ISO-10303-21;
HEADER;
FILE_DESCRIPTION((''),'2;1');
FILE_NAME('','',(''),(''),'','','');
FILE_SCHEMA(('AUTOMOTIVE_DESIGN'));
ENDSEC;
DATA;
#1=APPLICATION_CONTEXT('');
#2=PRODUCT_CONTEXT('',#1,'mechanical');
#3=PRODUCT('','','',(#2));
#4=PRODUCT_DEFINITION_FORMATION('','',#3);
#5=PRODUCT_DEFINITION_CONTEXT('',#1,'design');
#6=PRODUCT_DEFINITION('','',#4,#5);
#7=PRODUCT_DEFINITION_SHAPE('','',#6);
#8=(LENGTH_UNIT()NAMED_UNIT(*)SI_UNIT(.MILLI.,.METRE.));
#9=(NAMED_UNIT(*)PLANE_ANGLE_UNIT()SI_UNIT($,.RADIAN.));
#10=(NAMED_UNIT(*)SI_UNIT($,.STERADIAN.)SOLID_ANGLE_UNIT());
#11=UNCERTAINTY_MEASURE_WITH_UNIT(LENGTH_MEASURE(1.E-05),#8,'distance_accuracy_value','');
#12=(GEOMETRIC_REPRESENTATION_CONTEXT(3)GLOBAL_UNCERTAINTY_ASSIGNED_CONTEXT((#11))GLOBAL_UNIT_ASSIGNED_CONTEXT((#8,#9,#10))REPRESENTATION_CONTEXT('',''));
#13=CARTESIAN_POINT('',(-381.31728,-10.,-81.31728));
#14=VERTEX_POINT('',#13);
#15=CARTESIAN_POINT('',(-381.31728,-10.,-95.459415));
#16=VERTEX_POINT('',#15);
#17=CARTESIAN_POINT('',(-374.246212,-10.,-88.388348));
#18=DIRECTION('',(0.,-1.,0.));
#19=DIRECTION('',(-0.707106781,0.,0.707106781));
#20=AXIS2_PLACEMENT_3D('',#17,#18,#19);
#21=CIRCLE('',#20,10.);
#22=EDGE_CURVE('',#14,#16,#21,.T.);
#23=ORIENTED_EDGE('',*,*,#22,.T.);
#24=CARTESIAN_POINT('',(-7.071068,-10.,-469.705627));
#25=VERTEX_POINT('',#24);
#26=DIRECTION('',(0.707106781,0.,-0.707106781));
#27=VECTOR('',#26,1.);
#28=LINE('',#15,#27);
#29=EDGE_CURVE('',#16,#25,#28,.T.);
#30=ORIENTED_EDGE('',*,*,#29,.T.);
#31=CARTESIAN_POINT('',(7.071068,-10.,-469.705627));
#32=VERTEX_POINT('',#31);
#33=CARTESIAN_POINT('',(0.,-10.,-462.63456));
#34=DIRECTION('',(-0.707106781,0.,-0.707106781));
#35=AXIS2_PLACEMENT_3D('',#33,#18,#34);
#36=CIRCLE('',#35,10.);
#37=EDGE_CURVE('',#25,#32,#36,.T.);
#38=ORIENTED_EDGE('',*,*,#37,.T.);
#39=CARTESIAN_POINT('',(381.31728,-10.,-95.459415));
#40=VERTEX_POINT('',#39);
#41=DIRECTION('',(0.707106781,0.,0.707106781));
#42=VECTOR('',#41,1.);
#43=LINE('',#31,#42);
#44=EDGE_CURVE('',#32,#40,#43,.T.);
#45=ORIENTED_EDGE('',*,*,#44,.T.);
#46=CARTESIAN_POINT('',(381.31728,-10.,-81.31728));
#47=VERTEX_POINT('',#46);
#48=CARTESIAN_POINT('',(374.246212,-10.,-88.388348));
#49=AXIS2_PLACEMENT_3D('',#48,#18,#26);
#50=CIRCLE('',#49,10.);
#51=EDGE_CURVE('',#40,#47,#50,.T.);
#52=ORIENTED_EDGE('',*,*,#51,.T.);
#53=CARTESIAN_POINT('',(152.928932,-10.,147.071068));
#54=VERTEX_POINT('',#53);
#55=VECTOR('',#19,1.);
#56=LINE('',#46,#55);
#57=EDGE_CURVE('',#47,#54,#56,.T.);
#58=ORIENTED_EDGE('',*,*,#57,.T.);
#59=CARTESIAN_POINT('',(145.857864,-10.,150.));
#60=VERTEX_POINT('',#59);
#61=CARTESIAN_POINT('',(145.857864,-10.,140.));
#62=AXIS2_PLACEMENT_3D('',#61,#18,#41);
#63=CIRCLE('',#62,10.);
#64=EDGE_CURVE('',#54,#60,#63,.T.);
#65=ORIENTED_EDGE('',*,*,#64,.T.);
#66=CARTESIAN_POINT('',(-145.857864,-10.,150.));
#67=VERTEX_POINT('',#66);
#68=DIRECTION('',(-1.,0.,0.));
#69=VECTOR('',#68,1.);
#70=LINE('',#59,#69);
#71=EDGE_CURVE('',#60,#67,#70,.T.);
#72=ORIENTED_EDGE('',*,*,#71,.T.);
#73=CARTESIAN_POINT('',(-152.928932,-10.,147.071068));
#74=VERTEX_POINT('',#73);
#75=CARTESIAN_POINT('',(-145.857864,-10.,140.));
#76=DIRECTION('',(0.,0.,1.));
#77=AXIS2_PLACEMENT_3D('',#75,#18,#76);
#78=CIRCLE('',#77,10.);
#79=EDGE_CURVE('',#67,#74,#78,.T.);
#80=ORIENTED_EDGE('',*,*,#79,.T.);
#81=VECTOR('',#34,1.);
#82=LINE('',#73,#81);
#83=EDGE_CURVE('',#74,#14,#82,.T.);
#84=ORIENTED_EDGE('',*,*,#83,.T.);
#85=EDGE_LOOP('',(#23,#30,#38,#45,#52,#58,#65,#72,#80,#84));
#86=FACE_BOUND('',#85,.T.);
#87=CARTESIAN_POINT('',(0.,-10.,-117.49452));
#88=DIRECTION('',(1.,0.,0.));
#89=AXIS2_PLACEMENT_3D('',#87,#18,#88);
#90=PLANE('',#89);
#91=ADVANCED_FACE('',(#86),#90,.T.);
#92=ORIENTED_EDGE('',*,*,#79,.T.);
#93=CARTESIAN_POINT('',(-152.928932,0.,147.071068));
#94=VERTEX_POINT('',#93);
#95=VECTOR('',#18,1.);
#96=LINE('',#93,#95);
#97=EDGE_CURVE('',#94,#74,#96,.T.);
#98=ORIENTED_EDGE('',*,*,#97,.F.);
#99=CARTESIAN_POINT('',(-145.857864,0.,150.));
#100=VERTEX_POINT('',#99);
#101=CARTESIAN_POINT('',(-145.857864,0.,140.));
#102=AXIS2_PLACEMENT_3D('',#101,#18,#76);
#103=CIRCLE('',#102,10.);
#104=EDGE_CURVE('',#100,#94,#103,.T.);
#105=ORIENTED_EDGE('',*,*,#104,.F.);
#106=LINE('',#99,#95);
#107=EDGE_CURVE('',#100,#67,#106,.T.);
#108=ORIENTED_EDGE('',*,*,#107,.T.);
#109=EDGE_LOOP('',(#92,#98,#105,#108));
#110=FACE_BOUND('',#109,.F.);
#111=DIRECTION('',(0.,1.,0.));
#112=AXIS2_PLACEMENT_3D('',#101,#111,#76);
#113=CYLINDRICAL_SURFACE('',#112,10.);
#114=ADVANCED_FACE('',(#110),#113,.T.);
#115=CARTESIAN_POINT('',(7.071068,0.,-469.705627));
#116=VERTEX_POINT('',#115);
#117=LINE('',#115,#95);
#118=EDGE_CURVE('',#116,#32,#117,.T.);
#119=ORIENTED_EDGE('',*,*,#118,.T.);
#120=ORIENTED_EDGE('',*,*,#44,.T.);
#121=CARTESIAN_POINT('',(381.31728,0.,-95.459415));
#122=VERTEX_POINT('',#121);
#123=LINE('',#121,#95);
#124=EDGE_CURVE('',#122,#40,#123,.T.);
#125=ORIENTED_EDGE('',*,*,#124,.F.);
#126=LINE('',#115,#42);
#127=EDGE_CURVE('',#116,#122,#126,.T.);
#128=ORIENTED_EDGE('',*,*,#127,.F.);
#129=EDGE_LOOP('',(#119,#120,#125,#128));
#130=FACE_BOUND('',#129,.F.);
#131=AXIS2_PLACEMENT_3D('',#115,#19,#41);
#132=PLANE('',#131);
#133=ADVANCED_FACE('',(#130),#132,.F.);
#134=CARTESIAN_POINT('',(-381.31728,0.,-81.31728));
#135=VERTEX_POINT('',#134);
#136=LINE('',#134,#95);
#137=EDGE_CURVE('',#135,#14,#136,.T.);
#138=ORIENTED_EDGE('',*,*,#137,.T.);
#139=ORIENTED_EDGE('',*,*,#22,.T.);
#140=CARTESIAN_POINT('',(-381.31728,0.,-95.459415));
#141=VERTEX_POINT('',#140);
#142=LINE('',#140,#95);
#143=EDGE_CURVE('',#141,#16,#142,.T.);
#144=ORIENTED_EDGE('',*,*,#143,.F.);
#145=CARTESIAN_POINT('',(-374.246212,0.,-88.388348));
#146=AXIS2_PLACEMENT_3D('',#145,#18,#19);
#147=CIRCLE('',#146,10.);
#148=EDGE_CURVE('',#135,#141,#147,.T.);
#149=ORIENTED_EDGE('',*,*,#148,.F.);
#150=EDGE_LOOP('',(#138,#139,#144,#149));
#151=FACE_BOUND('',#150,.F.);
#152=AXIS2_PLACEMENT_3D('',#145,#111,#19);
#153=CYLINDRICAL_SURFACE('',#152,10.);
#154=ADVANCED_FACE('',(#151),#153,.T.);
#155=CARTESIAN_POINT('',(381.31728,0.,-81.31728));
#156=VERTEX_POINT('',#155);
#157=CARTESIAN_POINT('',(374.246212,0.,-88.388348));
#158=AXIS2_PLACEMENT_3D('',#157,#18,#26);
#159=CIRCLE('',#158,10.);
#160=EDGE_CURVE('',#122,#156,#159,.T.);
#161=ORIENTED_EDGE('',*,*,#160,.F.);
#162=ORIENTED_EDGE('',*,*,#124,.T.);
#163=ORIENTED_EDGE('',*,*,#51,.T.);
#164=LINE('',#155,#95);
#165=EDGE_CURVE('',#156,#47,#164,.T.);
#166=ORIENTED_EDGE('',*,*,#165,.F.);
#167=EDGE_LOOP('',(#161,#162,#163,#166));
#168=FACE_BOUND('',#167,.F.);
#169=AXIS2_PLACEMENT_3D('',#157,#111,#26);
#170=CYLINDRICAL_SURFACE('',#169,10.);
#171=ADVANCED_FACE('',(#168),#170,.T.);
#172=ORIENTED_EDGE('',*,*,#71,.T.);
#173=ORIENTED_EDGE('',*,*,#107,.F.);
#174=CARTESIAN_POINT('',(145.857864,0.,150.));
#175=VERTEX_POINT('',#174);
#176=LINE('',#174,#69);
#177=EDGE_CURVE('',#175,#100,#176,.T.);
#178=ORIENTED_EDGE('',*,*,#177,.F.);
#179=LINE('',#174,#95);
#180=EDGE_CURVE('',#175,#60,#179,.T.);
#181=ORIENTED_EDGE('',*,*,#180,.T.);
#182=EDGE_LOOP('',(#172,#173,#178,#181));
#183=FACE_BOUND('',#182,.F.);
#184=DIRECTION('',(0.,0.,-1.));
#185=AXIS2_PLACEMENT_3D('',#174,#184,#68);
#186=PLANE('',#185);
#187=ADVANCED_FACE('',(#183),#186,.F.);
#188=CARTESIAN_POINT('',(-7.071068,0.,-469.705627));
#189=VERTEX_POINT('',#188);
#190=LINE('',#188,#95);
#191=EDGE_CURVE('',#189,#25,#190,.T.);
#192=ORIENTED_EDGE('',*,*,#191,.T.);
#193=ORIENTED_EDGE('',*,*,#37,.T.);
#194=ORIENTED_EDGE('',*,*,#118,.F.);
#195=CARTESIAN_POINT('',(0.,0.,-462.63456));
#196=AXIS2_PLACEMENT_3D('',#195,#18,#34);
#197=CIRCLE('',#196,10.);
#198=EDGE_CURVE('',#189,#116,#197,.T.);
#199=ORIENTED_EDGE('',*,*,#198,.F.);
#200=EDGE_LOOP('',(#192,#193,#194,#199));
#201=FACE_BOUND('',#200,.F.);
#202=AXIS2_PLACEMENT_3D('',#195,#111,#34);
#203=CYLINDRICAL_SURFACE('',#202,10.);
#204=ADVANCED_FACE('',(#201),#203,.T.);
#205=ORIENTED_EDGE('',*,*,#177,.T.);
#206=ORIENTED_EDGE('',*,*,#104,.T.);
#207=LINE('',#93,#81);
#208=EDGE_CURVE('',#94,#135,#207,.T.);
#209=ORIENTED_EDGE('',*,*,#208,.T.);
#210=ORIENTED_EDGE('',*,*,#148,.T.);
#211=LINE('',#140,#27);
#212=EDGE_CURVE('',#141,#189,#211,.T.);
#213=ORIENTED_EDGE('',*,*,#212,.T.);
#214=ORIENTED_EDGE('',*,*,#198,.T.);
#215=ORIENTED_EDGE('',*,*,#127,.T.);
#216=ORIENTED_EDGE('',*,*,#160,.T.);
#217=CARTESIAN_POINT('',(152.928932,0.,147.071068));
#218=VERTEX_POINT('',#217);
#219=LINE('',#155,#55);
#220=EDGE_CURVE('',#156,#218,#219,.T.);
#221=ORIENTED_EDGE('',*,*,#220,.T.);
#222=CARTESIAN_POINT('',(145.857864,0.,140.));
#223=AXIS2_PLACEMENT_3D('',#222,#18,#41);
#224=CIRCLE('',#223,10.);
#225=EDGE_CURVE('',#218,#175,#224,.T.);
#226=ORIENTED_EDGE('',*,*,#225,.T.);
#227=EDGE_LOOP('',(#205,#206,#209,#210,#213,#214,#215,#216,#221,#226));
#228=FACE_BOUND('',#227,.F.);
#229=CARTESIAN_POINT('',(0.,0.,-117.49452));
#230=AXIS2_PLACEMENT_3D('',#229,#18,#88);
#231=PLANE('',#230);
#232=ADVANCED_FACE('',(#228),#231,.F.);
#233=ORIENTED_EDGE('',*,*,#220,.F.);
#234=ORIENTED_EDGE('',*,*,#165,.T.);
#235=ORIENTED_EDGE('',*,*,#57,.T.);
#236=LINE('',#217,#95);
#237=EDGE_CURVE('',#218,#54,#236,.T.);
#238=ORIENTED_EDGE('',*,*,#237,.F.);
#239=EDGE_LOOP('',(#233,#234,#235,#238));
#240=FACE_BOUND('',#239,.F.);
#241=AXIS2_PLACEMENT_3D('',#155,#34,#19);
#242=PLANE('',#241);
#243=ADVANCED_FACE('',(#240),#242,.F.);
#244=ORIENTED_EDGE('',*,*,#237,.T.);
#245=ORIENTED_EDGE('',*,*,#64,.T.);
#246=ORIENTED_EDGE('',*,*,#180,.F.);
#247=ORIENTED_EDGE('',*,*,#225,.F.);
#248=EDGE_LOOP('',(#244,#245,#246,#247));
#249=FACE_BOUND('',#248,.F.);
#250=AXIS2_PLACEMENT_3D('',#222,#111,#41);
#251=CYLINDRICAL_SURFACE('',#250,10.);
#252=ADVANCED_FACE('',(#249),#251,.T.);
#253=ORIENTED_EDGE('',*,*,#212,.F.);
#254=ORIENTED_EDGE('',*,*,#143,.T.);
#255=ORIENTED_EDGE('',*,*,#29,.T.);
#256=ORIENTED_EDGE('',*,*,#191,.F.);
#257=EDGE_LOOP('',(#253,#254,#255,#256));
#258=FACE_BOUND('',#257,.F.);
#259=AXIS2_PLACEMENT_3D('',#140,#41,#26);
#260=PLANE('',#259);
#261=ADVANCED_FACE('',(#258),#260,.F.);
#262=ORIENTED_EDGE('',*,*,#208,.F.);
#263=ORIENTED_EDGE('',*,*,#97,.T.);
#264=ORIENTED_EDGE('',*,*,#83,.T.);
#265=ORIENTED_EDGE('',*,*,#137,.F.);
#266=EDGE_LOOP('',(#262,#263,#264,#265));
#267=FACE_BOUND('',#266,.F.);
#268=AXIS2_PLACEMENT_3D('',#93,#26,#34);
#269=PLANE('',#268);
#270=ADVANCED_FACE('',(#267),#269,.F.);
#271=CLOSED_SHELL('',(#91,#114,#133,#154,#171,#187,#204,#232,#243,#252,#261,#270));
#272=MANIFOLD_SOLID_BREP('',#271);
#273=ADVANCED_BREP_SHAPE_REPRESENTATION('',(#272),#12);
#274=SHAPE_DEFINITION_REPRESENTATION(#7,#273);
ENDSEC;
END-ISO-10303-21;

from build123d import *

# Parameters (mm, degrees)
F1_DEPTH = 10


# Not quite as in the source:
# - a feature names something its author has since deleted; it is built from what else it names


with BuildPart() as f1:
    # F0 (on Front) → F1 (new body)
    with BuildSketch(Plane.XZ):
        with BuildLine():
            Line((-152.9289321881, 147.0710678119), (-300, 0))
            Line((-300, 0), (-381.3172798365, -81.3172798365))
            ThreePointArc((-381.3172798365, -81.3172798365), (-384.2462120246, -88.3883476483), (-381.3172798365, -95.4594154602))
            Line((-381.3172798365, -95.4594154602), (-155.0431098568, -321.7335854399))
            Line((-155.0431098568, -321.7335854399), (-7.0710678119, -469.7056274848))
            ThreePointArc((-7.0710678119, -469.7056274848), (0, -472.6345596729), (7.0710678119, -469.7056274848))
            Line((7.0710678119, -469.7056274848), (155.0431098568, -321.7335854399))
            Line((155.0431098568, -321.7335854399), (381.3172798365, -95.4594154602))
            ThreePointArc((381.3172798365, -95.4594154602), (384.2462120246, -88.3883476483), (381.3172798365, -81.3172798365))
            Line((381.3172798365, -81.3172798365), (300, 0))
            Line((300, 0), (152.9289321881, 147.0710678119))
            ThreePointArc((152.9289321881, 147.0710678119), (149.6846986999, 149.2387953251), (145.8578643763, 150))
            Line((145.8578643763, 150), (-145.8578643763, 150))
            ThreePointArc((-145.8578643763, 150), (-149.6846986999, 149.2387953251), (-152.9289321881, 147.0710678119))
        make_face()
    extrude(amount=F1_DEPTH)


solid = f1.part
